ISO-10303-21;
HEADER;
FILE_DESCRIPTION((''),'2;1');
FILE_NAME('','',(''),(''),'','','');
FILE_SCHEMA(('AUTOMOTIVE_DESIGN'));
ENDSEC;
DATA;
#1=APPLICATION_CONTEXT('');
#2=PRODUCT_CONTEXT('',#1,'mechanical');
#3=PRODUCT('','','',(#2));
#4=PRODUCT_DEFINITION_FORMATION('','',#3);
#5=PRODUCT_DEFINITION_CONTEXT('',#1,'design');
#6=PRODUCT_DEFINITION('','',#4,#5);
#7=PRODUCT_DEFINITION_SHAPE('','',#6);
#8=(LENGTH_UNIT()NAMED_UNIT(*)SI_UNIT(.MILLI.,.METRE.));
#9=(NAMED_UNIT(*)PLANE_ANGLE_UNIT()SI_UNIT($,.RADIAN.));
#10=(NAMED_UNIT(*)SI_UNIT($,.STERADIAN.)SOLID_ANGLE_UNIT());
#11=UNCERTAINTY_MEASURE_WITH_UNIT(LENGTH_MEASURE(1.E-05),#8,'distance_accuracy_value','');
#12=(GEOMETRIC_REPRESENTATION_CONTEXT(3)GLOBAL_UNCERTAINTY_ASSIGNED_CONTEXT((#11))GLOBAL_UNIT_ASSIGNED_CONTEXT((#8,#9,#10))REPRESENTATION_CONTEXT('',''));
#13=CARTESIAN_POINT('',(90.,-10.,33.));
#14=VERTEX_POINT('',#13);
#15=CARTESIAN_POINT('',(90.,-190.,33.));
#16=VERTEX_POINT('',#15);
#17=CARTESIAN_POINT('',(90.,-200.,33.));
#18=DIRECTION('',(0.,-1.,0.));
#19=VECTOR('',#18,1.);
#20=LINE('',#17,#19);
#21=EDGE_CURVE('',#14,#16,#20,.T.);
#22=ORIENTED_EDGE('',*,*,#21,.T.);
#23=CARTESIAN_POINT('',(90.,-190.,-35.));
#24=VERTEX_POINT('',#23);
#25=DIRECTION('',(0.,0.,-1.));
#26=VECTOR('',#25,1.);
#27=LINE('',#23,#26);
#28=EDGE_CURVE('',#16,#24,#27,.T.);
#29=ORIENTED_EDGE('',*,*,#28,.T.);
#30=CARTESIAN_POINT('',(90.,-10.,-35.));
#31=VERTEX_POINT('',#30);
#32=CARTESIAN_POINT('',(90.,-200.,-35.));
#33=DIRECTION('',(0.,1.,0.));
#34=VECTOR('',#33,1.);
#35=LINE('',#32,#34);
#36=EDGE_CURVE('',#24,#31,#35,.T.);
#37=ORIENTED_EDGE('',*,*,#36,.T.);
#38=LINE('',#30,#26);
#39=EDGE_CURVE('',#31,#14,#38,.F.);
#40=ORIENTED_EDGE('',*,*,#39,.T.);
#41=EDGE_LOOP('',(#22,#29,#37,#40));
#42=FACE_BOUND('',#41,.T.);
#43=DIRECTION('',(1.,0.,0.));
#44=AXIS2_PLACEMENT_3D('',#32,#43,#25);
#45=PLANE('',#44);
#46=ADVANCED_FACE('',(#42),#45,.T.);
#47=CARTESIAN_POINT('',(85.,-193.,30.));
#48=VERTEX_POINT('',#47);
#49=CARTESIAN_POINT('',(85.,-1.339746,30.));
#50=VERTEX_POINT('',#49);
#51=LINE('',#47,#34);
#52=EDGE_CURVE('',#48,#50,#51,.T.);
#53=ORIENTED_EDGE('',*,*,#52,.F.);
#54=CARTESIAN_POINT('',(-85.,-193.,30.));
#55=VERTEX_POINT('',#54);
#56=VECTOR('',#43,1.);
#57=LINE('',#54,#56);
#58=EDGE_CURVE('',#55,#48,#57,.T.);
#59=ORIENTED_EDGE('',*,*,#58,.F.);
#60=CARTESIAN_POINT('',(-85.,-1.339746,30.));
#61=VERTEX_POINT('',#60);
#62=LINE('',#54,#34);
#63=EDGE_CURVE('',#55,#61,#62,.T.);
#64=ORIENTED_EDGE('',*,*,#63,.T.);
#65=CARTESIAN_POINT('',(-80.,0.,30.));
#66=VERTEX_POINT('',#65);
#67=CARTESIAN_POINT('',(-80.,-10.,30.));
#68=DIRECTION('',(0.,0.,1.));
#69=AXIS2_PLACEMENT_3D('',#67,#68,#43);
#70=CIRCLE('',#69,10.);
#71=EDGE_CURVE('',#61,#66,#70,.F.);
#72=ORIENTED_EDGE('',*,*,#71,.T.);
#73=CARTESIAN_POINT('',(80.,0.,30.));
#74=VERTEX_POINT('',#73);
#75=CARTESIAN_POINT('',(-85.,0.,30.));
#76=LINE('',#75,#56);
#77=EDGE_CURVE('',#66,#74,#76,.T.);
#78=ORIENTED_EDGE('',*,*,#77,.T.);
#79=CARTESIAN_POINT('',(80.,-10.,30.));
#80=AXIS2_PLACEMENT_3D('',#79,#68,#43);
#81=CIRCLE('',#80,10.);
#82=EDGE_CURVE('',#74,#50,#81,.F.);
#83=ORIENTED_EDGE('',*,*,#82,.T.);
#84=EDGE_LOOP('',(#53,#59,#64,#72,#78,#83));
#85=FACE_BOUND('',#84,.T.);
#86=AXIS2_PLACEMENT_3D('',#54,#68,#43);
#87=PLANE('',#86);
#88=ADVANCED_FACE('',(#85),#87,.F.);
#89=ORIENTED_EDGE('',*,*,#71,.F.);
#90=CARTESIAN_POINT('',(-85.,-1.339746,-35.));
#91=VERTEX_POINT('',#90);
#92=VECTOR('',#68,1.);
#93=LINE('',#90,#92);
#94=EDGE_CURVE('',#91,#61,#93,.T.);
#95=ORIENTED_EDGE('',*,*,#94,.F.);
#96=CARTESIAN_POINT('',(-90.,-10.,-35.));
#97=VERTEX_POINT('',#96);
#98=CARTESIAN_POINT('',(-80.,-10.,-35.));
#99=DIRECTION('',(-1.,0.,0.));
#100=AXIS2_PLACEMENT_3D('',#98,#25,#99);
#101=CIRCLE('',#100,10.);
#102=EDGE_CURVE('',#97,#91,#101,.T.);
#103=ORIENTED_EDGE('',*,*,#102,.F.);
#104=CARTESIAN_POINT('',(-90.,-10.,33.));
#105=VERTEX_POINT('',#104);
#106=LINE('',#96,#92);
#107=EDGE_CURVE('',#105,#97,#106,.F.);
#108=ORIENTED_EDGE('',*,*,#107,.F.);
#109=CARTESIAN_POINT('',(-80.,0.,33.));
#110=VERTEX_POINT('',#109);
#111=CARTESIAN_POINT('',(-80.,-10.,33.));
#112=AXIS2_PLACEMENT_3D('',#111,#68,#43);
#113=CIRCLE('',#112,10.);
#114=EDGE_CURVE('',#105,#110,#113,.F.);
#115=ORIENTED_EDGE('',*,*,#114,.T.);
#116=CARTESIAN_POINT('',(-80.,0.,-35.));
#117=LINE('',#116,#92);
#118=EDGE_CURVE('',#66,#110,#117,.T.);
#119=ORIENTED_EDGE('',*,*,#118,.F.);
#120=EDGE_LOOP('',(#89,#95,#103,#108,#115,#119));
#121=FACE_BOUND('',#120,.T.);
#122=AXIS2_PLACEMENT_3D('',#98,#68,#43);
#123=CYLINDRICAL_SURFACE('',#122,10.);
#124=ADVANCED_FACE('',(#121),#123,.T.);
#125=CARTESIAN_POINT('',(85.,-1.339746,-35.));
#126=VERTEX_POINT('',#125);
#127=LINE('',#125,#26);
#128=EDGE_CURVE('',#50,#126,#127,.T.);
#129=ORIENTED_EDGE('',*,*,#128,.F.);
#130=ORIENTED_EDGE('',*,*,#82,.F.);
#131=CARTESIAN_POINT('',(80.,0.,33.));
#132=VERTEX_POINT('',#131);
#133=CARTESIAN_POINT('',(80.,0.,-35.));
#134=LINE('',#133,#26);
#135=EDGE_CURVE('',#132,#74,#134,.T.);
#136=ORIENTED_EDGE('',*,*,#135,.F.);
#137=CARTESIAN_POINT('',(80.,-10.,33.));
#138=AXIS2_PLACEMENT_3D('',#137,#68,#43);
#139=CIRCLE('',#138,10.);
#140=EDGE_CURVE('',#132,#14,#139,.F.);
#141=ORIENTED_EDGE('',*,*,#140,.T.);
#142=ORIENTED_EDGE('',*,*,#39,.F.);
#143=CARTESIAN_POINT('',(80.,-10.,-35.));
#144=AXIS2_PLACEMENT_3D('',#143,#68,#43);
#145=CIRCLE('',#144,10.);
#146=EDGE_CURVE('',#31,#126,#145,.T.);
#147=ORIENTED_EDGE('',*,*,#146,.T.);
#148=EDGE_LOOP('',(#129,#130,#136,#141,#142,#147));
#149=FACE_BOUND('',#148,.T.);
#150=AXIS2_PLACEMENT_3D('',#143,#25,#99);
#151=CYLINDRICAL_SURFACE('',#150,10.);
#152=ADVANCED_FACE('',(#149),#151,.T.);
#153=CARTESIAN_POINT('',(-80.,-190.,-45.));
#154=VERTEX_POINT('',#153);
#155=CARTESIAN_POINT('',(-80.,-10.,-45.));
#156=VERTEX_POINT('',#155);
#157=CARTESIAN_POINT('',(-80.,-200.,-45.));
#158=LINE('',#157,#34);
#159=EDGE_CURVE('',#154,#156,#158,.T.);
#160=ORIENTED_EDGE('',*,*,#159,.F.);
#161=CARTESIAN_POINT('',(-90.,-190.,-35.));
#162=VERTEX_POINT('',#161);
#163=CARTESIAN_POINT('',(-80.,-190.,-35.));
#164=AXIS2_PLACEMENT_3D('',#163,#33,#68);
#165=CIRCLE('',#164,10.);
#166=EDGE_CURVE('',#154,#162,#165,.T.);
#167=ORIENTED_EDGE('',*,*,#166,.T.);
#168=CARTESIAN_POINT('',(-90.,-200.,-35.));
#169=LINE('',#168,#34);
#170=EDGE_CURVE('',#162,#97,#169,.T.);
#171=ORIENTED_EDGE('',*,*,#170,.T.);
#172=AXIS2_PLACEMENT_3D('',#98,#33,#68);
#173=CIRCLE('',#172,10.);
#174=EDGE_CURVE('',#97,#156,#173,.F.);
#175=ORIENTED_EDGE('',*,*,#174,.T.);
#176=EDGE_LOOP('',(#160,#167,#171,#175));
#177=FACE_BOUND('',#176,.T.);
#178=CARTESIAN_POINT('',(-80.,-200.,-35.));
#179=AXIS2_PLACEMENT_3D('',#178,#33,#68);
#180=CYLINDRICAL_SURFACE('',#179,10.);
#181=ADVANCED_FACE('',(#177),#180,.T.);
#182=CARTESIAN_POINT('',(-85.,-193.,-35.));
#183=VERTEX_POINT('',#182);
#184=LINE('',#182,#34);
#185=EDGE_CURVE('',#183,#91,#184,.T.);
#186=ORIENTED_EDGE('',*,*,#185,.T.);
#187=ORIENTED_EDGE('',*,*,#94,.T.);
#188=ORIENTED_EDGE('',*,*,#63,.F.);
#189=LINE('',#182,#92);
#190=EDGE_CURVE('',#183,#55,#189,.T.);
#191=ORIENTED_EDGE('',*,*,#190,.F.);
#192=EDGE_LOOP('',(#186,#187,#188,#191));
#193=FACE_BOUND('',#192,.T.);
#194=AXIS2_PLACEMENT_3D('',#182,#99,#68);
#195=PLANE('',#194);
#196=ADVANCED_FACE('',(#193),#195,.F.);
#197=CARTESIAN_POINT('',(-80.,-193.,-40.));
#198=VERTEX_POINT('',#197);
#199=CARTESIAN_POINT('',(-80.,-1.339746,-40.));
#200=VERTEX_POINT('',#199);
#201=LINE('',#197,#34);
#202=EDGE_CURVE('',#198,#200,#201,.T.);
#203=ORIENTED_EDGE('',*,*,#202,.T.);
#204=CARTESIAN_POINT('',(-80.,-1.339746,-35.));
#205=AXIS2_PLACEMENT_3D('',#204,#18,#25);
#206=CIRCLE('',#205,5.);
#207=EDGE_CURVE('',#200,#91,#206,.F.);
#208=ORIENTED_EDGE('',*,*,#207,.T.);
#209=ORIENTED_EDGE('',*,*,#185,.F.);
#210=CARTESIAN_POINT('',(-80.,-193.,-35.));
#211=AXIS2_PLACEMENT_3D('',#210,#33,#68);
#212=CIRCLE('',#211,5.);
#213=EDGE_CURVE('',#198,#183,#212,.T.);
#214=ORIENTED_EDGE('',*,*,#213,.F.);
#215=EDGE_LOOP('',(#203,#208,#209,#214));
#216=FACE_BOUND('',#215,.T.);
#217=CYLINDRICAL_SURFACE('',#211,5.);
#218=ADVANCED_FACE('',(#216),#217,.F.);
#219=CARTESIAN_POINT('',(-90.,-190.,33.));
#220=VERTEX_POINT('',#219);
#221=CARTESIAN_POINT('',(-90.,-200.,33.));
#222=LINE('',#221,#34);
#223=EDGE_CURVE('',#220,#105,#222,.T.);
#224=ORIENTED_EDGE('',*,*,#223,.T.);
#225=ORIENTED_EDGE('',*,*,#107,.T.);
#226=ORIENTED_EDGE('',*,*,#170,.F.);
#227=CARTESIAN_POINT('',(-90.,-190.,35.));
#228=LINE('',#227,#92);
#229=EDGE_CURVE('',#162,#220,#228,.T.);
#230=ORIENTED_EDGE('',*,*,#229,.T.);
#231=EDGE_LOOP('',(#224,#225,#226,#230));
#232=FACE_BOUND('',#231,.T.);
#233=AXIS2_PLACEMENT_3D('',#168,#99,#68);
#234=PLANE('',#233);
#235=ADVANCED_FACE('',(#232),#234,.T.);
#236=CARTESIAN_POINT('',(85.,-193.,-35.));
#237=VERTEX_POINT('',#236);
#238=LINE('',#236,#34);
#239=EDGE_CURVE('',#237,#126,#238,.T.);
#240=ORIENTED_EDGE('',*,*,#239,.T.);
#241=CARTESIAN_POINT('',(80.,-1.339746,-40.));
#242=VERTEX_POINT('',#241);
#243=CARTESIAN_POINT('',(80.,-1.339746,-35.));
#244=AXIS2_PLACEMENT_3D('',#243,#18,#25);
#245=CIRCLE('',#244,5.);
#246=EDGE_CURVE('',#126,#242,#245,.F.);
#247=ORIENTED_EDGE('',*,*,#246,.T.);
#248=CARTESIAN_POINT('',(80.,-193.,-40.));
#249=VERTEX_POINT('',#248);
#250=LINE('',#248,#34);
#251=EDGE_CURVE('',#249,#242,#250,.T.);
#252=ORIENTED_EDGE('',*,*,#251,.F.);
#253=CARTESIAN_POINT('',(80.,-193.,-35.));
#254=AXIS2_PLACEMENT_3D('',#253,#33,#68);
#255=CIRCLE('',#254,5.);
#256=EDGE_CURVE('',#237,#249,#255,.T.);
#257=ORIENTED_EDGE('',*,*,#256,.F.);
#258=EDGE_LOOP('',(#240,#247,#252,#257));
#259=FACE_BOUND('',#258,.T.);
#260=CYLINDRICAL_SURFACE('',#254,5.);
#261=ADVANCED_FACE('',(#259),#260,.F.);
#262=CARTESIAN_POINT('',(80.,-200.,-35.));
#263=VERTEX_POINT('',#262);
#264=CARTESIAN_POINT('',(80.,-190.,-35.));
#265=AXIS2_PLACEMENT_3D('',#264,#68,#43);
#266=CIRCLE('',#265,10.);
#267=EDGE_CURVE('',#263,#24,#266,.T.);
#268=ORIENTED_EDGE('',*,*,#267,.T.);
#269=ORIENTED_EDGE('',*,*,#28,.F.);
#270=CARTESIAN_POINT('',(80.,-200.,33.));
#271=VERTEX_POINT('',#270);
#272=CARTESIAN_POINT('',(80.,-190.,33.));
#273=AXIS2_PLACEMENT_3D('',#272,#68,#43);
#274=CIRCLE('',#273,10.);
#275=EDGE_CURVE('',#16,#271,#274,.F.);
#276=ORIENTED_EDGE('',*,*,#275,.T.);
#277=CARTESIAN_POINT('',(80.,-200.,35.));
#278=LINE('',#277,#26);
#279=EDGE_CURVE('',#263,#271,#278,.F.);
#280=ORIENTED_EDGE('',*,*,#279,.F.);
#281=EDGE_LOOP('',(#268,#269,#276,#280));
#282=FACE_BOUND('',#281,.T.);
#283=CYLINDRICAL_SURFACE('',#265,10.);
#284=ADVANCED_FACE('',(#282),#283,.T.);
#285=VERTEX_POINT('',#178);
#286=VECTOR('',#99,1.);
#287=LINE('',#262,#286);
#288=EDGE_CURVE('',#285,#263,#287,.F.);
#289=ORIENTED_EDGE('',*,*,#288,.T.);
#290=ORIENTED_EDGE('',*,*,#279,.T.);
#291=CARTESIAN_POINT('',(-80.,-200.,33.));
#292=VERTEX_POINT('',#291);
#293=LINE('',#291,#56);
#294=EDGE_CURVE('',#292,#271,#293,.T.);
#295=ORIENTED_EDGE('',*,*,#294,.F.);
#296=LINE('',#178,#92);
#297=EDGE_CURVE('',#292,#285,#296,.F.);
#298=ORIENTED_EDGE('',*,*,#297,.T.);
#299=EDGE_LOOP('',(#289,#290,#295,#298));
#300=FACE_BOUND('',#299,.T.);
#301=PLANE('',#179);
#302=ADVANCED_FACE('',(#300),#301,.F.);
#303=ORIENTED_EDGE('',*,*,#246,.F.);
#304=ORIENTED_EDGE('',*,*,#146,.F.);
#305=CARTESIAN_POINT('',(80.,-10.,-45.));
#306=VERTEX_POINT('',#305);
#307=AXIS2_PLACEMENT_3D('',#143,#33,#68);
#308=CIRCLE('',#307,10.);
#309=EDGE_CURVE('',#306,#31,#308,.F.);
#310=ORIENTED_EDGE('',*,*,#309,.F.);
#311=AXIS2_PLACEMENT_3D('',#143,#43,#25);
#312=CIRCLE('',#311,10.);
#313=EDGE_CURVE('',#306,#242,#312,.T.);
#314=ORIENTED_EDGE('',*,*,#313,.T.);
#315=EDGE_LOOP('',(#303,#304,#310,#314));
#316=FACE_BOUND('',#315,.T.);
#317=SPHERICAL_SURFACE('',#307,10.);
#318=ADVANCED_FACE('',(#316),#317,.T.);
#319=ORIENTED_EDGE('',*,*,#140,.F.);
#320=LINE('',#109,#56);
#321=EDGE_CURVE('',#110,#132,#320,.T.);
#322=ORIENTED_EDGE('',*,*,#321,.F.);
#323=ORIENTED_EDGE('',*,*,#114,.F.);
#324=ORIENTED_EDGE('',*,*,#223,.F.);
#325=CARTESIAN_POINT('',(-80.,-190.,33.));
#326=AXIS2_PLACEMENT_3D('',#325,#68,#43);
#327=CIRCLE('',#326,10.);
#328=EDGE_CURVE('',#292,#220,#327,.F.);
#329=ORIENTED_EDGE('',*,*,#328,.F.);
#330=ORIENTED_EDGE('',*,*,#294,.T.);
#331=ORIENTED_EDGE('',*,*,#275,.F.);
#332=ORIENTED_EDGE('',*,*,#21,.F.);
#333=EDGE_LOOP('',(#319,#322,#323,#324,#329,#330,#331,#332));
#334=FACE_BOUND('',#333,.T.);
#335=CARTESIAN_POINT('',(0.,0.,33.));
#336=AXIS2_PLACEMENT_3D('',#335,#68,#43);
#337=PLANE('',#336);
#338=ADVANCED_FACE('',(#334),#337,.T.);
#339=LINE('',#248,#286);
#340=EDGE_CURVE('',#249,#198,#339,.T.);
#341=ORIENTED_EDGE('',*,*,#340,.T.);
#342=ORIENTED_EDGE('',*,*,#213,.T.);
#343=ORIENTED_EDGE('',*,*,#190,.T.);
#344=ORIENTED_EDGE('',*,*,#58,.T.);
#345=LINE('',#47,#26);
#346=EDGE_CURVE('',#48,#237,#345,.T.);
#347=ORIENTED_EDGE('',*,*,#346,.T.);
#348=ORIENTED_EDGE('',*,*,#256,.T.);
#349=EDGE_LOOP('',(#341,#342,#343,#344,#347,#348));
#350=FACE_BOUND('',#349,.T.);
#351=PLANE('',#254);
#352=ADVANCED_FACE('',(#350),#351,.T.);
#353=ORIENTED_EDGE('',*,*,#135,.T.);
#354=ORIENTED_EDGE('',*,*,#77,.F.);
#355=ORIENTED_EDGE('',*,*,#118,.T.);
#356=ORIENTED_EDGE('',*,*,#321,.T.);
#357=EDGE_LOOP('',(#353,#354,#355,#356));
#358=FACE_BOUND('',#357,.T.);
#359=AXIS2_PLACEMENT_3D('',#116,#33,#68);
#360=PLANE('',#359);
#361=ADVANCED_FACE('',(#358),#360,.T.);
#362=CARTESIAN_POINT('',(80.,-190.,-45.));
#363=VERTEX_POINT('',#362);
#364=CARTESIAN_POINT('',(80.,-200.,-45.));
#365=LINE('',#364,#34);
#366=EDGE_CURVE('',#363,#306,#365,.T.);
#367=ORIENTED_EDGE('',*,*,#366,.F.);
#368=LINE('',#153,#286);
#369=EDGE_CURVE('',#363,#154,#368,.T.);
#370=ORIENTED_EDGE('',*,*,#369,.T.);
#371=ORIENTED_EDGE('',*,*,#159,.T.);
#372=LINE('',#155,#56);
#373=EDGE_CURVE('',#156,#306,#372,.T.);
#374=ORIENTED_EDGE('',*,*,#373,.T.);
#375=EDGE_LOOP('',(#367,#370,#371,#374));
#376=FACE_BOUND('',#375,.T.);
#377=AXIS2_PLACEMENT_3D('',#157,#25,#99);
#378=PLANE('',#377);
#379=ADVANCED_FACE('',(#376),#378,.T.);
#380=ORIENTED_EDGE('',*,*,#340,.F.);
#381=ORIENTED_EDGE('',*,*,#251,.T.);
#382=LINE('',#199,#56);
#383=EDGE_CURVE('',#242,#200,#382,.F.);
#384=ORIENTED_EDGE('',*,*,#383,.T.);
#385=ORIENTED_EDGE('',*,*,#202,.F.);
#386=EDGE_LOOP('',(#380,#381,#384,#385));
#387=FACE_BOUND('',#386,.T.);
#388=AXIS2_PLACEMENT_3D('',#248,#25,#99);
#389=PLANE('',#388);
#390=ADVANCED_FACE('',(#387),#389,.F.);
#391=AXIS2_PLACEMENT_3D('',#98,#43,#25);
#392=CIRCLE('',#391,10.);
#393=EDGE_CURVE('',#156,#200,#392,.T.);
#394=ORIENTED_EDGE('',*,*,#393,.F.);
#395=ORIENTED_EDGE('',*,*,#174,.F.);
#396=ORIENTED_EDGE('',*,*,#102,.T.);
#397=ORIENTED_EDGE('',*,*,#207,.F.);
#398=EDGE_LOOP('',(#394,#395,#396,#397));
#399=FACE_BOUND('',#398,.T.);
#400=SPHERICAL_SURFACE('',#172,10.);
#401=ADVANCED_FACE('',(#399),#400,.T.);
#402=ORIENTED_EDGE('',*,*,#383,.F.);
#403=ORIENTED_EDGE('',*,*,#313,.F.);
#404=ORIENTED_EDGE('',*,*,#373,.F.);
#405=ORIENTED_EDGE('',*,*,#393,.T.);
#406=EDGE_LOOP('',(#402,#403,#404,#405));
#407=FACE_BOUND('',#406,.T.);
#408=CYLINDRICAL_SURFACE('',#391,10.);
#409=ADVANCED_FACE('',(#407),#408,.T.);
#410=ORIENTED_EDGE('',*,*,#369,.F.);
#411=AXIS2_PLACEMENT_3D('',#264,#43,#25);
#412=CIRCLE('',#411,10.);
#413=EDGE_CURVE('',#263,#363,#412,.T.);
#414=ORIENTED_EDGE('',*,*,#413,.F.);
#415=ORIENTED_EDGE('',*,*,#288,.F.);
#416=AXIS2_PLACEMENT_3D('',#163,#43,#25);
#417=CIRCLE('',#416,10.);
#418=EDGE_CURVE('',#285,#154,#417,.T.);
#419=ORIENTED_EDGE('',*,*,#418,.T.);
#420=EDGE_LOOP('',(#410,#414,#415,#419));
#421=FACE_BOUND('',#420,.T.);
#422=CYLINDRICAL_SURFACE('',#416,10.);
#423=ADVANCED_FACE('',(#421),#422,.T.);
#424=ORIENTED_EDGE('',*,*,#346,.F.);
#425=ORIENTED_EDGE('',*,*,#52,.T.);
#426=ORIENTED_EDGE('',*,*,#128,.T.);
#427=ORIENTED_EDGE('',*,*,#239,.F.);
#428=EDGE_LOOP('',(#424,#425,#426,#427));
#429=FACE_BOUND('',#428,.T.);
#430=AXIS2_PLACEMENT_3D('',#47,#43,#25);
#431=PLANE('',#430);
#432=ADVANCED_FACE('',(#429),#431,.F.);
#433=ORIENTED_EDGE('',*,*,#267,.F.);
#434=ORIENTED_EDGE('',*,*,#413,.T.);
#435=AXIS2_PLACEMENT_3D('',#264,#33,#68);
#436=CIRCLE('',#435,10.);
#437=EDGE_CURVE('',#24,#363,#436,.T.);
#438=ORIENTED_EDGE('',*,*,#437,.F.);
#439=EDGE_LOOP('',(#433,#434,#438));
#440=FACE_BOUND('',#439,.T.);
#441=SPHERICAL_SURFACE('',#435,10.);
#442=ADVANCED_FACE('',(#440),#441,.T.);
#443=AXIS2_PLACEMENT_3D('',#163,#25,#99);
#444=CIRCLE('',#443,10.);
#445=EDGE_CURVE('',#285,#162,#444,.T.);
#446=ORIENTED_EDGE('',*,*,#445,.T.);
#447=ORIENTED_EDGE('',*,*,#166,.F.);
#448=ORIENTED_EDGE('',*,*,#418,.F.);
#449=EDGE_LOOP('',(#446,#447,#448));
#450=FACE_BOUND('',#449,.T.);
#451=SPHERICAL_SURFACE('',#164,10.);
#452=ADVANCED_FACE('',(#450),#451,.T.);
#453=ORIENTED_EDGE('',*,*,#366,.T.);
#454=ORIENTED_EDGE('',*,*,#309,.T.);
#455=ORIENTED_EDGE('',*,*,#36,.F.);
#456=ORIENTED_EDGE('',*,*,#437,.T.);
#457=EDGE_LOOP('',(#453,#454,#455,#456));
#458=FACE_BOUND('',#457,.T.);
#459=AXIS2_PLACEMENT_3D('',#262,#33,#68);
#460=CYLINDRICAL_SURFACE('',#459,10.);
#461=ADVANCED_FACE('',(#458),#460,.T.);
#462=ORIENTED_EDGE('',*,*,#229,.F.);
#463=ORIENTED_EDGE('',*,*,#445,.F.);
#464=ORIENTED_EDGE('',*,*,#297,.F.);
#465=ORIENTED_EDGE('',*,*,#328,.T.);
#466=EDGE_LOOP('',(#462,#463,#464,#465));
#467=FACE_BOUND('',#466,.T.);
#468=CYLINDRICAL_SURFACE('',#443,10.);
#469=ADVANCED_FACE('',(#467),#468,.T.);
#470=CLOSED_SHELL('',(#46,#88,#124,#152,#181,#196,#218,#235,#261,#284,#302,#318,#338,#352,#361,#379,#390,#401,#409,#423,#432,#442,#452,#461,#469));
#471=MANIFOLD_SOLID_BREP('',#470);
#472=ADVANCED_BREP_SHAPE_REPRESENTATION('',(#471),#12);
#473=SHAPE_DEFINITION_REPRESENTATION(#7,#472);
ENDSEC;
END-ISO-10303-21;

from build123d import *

# Parameters (mm, degrees)
BOSS_EXTRUDE1_DEPTH = 200
CUT_EXTRUDE1_DEPTH  = 193
FILLET1_R           = 10
FILLET2_R           = 10
SKETCH5_W           = 221.977044751
SKETCH5_H           = 222.508090313
CUT_EXTRUDE2_DEPTH  = 2


with BuildPart() as part:
    # Sketch1 → Boss-Extrude1 (new body)
    with BuildSketch(Plane(origin=(0, 0, 0), x_dir=(1, 0, 0), z_dir=(0, 1, 0))):
        with BuildLine():
            Line((-80, 45), (80, 45))
            ThreePointArc((80, 45), (87.071067812, 42.071067812), (90, 35))
            Line((90, 35), (90, -35))
            Line((90, -35), (-90, -35))
            Line((-90, -35), (-90, 35))
            ThreePointArc((-90, 35), (-87.071067812, 42.071067812), (-80, 45))
        make_face()
    extrude(amount=-BOSS_EXTRUDE1_DEPTH)

    # Sketch2 → Cut-Extrude1 (cut)
    with BuildSketch(Plane(origin=(0, 0, 0), x_dir=(1, 0, 0), z_dir=(0, 1, 0))):
        with BuildLine():
            Line((85, -30), (85, 35))
            ThreePointArc((85, 35), (83.535533906, 38.535533906), (80, 40))
            Line((80, 40), (-80, 40))
            ThreePointArc((-80, 40), (-83.535533906, 38.535533906), (-85, 35))
            Line((-85, 35), (-85, -30))
            Line((-85, -30), (85, -30))
        make_face()
    extrude(amount=-CUT_EXTRUDE1_DEPTH, mode=Mode.SUBTRACT)

    # Fillet1
    fillet1_edges = [part.edges().sort_by_distance(p)[0] for p in [
        (0, -200, -45),
        (-87.071067812, -200, -42.071067812),
        (-90, -200, 0),
        (90, -200, 0),
        (87.071067812, -200, -42.071067812),
    ]]
    fillet(fillet1_edges, radius=FILLET1_R)

    # Fillet2
    # the kernel refuses this fillet: 10 mm, written as the material it takes off along each edge
    with BuildSketch(Plane(origin=(90, 0, -35), x_dir=(-1, 0, 0), z_dir=(0, 0, 1)), Plane(origin=(-90, 0, 60), x_dir=(1, 0, 0), z_dir=(0, 0, -1))) as fillet2_piece_1:
        with BuildLine():
            CenterArc((FILLET2_R, FILLET2_R), FILLET2_R, 180, 90)
            Line((0, FILLET2_R), (0, 0))
            Line((0, 0), (FILLET2_R, 0))
        make_face()
    extrude(amount=95, mode=Mode.SUBTRACT)
    with BuildSketch(Plane(origin=(-80, 0, -35), x_dir=(-1, 0, 0), z_dir=(0, 0, 1))) as fillet2_piece_2:
        with BuildLine():
            CenterArc((10 - FILLET2_R, FILLET2_R), FILLET2_R, 270, 90)
            Line((10 - FILLET2_R, 0), (10, 0))
            Line((10, 0), (10, FILLET2_R))
        make_face()
    revolve(axis=Axis((-80, 0, -35), (0, -1, 0)), revolution_arc=90, mode=Mode.SUBTRACT)
    with BuildSketch(Plane(origin=(-80, 0, -45), x_dir=(0, -1, 0), z_dir=(1, 0, 0))) as fillet2_piece_3:
        with BuildLine():
            CenterArc((FILLET2_R, -FILLET2_R), FILLET2_R, 90, 90)
            Line((0, -FILLET2_R), (0, 0))
            Line((0, 0), (FILLET2_R, 0))
        make_face()
    extrude(amount=160, mode=Mode.SUBTRACT)
    with BuildSketch(Plane(origin=(80, 0, -35), x_dir=(0, 0, -1), z_dir=(-1, 0, 0))) as fillet2_piece_4:
        with BuildLine():
            CenterArc((10 - FILLET2_R, FILLET2_R), FILLET2_R, 270, 90)
            Line((10, FILLET2_R), (10, 0))
            Line((10, 0), (10 - FILLET2_R, 0))
        make_face()
    revolve(axis=Axis((80, 0, -35), (0, -1, 0)), revolution_arc=90, mode=Mode.SUBTRACT)

    # Sketch5 → Cut-Extrude2 (cut)
    with BuildSketch(Plane.XY.offset(35)):
        with Locations((11.417479574, -99.417273917)):
            Rectangle(SKETCH5_W, SKETCH5_H)
    extrude(amount=-CUT_EXTRUDE2_DEPTH, mode=Mode.SUBTRACT)


solid = part.part
